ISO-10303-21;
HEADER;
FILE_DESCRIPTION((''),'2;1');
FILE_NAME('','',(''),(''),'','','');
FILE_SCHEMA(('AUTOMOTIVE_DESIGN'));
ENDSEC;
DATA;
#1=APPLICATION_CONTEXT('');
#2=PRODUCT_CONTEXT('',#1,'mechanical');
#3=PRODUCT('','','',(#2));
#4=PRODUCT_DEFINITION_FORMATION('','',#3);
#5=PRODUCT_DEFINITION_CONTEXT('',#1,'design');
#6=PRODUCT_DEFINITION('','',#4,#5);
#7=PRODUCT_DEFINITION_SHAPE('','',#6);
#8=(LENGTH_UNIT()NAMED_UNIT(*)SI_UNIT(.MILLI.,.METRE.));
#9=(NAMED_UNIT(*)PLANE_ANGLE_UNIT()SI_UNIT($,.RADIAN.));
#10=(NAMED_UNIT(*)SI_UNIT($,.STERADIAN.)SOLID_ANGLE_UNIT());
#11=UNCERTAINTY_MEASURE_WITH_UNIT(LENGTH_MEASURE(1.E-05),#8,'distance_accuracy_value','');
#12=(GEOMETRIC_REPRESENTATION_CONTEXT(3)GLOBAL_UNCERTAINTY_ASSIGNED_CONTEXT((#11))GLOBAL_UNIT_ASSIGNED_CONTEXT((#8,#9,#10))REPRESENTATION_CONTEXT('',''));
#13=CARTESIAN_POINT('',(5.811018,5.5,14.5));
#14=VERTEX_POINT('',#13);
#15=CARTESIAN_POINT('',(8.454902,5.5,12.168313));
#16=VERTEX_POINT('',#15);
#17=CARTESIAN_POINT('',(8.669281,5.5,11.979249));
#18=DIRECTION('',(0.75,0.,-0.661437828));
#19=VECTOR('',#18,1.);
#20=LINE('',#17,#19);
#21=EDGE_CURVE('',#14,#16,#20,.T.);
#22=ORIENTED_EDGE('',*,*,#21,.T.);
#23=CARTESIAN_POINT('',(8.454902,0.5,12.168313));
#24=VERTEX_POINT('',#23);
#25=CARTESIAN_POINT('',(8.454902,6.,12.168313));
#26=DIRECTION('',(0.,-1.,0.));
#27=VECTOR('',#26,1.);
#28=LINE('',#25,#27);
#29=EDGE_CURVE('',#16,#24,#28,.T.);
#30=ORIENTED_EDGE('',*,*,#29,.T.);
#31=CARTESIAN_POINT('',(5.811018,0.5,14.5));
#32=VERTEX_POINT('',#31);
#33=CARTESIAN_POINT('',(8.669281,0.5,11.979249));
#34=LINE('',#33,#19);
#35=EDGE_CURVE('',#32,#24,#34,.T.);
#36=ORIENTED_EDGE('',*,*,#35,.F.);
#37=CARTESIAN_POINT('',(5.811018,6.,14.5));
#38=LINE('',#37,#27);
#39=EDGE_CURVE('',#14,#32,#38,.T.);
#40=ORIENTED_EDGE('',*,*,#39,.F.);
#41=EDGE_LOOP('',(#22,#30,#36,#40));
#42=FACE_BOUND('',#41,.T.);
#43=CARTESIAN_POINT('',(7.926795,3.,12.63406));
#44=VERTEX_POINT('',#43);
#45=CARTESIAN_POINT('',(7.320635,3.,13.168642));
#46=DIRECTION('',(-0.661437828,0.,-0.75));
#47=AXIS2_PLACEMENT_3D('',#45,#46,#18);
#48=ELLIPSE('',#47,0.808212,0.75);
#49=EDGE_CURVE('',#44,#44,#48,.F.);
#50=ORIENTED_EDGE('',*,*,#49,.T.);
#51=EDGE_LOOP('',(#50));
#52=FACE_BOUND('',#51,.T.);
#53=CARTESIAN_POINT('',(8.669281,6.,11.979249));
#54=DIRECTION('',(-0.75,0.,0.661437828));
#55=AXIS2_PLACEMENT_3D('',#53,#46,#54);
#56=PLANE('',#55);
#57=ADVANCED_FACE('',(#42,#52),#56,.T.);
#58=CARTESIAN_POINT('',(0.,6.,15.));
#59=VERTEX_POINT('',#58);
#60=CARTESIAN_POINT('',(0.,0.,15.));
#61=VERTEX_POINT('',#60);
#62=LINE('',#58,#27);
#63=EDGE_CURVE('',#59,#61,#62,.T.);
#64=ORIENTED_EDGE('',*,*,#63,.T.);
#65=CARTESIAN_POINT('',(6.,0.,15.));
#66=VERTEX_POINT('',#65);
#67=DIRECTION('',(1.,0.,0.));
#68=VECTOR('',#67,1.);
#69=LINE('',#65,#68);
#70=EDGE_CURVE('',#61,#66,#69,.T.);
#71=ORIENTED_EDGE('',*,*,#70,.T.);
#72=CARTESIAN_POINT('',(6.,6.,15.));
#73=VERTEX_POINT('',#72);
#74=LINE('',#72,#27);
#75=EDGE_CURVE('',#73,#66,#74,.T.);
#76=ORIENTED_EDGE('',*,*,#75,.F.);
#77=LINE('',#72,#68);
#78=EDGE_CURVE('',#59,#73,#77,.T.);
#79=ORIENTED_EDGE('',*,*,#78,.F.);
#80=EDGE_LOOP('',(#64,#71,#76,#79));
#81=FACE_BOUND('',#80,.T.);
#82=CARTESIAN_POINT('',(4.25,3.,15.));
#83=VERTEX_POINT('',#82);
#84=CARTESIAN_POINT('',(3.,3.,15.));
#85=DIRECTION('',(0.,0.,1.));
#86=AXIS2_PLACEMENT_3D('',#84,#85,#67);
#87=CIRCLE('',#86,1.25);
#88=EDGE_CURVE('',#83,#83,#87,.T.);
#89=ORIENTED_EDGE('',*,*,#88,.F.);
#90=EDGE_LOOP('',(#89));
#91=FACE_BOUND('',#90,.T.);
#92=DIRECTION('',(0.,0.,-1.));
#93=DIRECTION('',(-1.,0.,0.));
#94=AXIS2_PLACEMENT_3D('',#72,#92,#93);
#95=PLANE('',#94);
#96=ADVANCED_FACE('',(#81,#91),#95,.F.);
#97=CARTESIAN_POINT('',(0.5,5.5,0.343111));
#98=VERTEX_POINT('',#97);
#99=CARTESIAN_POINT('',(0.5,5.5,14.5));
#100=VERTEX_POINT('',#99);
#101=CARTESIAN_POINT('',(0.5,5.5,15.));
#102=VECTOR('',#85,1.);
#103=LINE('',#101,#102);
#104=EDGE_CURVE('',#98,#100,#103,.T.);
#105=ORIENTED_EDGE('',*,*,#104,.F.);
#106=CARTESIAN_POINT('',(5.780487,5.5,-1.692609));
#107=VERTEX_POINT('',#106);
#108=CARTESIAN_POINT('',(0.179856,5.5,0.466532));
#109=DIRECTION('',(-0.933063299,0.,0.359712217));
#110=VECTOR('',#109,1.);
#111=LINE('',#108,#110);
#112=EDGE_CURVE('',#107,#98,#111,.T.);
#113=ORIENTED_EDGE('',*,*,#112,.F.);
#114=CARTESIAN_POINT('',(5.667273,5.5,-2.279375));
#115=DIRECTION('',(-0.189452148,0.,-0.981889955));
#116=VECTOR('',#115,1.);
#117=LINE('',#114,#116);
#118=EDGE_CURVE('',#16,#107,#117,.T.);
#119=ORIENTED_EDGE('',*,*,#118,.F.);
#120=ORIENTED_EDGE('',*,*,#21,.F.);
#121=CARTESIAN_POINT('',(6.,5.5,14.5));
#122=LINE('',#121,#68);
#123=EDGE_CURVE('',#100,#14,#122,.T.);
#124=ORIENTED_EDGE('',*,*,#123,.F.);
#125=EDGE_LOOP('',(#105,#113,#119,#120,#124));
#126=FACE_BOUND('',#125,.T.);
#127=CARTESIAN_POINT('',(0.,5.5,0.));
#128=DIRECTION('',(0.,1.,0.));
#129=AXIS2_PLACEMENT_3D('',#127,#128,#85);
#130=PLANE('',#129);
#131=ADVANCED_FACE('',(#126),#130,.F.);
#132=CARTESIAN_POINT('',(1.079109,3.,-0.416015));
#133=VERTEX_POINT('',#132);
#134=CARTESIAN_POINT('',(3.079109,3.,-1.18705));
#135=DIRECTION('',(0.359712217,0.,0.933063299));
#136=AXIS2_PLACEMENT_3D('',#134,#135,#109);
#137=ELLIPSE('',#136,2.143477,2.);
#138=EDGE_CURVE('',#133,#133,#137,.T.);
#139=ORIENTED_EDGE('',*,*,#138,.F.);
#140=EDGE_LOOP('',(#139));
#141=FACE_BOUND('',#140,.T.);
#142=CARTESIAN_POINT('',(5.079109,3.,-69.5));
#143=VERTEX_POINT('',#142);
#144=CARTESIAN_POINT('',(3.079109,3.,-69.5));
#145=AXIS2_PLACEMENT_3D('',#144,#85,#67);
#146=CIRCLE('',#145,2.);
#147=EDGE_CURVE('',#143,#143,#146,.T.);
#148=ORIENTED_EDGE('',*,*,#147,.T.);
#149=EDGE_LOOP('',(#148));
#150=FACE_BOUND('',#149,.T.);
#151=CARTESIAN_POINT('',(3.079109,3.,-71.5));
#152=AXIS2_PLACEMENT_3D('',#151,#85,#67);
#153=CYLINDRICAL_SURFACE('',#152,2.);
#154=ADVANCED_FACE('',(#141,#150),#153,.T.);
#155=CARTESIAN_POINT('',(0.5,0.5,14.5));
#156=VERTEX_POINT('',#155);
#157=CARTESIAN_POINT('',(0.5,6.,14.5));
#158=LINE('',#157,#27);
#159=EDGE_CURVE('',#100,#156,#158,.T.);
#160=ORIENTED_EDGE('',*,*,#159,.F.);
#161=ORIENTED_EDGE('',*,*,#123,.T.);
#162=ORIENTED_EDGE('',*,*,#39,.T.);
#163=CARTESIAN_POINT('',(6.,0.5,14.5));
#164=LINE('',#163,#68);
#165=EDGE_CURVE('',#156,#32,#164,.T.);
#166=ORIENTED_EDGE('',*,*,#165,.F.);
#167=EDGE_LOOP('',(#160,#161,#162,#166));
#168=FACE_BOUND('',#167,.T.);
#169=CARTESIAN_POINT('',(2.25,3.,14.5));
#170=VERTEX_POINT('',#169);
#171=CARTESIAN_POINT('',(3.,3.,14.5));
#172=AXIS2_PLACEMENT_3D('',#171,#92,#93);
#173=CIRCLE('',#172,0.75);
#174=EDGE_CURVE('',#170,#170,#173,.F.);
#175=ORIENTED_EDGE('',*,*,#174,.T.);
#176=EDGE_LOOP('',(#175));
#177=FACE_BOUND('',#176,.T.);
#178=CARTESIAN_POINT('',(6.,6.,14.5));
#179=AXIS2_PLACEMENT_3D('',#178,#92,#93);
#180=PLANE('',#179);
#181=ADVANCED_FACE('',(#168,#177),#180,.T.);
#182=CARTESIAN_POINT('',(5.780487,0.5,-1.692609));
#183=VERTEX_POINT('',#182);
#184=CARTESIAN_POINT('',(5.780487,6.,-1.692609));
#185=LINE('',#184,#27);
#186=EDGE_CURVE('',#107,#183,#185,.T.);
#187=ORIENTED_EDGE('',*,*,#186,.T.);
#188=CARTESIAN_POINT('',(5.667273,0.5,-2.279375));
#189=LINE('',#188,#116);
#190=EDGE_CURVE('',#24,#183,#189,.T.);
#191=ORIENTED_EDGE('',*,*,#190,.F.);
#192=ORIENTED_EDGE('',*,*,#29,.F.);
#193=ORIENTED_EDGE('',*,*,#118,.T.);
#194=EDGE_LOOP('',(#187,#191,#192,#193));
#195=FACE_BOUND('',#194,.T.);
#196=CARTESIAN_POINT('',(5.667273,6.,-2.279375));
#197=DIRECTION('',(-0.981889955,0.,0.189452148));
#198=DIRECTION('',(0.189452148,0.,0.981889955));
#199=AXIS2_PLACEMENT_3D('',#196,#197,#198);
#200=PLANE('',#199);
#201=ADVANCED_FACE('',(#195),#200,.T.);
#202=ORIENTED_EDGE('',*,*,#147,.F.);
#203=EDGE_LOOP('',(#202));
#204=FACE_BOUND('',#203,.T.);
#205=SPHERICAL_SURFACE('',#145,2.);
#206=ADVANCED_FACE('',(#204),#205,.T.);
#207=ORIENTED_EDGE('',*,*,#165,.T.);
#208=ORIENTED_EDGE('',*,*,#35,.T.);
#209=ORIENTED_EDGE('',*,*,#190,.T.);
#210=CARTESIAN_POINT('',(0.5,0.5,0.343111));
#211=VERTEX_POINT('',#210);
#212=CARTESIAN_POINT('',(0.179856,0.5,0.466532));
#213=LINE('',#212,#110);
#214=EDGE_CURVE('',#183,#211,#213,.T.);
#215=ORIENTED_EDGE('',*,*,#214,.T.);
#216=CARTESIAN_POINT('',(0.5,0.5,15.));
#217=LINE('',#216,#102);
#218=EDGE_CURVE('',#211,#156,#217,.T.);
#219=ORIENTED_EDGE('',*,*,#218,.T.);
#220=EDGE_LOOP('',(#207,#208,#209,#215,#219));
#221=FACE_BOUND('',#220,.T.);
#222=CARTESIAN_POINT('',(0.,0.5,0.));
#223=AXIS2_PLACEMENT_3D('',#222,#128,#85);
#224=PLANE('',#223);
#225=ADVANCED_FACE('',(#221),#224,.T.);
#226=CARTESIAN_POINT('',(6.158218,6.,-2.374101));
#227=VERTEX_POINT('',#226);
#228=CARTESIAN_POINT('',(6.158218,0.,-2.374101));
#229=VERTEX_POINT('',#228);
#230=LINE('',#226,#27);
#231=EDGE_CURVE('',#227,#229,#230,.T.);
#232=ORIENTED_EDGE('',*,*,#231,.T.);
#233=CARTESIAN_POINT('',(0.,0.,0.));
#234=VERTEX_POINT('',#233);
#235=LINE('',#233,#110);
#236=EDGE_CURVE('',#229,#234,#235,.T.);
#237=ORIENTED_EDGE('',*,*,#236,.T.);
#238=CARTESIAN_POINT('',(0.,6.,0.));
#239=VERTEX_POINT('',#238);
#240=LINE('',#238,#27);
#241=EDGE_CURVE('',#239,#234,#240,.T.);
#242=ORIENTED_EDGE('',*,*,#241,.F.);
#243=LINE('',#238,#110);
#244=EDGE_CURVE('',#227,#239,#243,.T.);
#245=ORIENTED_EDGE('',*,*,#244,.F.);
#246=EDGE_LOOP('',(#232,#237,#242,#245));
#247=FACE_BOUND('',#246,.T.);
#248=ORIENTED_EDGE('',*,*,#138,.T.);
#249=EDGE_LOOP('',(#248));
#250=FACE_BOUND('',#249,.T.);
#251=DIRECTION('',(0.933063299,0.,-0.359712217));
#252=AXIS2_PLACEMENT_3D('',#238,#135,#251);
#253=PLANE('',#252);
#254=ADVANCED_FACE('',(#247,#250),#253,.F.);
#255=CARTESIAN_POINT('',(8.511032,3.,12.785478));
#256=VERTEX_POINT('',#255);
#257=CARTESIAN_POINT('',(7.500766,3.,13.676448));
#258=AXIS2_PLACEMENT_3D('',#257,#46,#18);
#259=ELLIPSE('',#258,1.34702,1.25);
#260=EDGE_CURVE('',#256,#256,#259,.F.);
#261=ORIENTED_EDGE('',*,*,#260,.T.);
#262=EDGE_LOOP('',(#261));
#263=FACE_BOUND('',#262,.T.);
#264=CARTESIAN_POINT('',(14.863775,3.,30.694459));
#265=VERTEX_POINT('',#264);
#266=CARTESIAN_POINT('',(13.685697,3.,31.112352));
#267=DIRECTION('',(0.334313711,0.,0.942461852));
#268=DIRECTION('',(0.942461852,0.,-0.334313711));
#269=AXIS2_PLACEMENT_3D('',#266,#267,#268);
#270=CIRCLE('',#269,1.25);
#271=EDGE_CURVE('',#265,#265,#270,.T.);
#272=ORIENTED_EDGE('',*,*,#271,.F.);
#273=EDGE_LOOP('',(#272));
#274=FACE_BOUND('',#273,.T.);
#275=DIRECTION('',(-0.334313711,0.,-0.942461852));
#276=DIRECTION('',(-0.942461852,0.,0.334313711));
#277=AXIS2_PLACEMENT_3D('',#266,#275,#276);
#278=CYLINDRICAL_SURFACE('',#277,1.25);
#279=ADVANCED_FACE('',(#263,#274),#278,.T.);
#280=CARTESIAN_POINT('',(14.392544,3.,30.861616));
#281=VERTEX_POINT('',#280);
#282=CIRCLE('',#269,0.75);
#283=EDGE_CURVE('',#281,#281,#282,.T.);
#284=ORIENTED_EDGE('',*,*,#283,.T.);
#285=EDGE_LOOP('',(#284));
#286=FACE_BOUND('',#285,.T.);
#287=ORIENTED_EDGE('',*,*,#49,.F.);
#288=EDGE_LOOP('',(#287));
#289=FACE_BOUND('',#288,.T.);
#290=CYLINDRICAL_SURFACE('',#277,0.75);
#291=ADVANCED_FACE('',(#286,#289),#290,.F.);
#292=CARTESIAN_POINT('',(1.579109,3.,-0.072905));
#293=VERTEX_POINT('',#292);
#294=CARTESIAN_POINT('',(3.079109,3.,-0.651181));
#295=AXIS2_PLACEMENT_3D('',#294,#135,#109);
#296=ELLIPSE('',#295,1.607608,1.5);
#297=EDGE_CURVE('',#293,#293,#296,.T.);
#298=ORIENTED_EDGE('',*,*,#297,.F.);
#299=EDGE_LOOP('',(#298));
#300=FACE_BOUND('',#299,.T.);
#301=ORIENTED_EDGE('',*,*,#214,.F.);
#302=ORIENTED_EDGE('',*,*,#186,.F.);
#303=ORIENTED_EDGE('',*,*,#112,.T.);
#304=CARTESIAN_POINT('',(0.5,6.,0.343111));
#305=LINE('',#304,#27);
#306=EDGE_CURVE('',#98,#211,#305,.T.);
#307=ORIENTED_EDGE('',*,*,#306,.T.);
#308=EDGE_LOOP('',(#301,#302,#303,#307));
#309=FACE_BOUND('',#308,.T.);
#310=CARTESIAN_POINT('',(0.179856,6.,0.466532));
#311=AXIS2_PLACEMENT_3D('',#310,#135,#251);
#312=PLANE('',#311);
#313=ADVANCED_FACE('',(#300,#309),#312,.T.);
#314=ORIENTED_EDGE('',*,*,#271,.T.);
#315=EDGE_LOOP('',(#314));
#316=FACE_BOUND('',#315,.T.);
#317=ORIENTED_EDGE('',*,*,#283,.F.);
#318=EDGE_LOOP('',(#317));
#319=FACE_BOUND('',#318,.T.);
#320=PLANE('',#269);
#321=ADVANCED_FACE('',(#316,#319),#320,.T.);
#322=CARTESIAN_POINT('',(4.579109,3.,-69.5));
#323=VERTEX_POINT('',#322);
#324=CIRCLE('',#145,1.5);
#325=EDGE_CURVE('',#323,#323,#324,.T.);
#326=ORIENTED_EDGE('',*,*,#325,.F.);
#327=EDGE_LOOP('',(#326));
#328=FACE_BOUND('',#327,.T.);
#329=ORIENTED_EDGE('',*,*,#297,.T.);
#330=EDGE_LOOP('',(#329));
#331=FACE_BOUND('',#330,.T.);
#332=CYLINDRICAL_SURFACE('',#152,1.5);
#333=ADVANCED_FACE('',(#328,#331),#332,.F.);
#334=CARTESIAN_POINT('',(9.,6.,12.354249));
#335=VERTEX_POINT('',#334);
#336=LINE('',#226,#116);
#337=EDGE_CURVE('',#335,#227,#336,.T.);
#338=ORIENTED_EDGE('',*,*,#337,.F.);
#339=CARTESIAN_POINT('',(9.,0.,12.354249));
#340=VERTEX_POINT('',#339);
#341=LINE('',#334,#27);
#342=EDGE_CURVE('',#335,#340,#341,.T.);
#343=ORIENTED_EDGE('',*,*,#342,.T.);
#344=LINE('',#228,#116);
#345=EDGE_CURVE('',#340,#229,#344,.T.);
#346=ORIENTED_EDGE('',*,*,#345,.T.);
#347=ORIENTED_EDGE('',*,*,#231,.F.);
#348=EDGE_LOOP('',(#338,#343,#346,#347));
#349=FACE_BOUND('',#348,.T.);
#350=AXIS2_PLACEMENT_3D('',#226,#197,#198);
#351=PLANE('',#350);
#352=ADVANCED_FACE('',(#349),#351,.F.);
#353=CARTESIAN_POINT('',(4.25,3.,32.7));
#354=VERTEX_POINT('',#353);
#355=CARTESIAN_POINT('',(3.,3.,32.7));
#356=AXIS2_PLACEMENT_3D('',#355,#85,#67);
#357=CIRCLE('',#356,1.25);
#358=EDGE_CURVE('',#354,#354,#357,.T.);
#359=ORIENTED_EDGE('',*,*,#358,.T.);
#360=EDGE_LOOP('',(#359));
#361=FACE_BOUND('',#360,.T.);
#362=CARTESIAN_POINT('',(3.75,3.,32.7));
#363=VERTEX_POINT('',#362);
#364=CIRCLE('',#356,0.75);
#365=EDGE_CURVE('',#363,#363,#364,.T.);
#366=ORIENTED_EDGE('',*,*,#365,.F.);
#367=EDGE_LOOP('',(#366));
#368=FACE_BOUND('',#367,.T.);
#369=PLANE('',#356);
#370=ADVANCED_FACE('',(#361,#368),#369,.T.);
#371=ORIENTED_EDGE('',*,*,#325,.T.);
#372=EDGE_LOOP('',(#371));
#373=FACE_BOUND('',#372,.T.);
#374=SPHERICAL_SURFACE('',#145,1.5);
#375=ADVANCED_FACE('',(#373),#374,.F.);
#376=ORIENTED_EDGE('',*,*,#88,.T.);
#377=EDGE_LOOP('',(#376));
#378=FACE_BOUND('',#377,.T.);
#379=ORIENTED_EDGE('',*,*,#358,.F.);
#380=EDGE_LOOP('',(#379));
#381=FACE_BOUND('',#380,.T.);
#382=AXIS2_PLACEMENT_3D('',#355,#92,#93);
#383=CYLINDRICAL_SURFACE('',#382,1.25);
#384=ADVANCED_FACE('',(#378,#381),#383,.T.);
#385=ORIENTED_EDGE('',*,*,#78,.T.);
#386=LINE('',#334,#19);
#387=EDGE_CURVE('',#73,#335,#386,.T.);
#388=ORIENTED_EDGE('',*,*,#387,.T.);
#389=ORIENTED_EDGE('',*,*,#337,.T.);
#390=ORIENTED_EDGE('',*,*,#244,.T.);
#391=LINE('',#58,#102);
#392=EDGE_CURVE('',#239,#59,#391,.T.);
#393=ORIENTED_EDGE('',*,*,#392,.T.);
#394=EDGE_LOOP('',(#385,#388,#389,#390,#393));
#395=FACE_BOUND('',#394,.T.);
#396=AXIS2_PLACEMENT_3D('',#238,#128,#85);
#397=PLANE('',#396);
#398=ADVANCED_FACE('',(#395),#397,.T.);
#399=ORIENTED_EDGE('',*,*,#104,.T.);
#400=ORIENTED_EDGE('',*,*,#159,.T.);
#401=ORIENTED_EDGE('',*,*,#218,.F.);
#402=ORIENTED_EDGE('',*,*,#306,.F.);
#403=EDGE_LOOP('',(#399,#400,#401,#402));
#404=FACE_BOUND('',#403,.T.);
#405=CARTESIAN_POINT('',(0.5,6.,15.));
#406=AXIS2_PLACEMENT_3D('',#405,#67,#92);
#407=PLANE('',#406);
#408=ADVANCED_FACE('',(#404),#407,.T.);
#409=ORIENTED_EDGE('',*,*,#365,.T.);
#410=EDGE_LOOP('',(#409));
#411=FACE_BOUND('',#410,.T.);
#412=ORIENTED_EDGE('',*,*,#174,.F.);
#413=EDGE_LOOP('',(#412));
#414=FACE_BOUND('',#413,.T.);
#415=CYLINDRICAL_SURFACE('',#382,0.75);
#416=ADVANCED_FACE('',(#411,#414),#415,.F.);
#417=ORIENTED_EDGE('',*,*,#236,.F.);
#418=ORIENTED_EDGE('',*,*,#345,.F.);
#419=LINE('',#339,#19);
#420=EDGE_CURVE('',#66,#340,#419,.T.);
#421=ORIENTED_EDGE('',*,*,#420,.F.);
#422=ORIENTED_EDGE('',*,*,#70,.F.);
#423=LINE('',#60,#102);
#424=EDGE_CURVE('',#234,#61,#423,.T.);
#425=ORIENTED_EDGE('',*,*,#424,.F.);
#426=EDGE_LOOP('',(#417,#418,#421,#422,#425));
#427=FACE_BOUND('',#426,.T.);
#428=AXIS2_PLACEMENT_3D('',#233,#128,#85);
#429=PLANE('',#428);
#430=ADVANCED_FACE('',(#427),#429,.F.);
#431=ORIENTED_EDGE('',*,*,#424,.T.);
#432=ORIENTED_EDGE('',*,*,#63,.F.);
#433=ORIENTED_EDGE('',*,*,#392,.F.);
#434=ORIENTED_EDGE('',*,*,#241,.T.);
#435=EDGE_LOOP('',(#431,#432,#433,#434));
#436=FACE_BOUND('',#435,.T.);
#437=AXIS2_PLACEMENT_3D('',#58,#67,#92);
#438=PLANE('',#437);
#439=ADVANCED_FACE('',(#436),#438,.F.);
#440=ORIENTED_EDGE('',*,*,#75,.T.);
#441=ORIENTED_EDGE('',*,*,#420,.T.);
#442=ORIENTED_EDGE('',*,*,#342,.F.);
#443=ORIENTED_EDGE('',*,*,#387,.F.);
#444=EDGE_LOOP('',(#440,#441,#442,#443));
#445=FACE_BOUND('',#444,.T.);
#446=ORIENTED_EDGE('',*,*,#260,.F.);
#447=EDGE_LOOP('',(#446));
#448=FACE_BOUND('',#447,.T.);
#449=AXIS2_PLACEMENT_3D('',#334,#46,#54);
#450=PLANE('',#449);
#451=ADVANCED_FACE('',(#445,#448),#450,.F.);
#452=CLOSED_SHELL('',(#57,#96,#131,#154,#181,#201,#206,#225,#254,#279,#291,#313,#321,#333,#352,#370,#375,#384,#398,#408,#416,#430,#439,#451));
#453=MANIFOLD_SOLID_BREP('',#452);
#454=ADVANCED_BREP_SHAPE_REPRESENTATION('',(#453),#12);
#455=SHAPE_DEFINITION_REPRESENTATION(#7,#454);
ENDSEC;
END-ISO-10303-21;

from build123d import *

# Parameters (mm, degrees)
BOSS_EXTRUDE1_DEPTH = 6
SKETCH4_R           = 2
BOSS_EXTRUDE2_DEPTH = 71.5
FILLET1_R           = 2
SKETCH5_R           = 1.25
BOSS_EXTRUDE3_DEPTH = 17.7
SKETCH7_R           = 1.25
BOSS_EXTRUDE4_DEPTH = 18.5
BOSS_EXTRUDE5_START = -5
SKETCH7_2_R         = 1.25
BOSS_EXTRUDE5_DEPTH = 5
SHELL1_T            = -0.5


with BuildPart() as part:
    # Sketch1 → Boss-Extrude1 (new body)
    with BuildSketch(Plane(origin=(0, 0, 0), x_dir=(1, 0, 0), z_dir=(0, 1, 0))):
        Polygon((0, 0), (6.158217776, 2.374100634), (9, -12.354248689), (6, -15), (0, -15), align=None)
    extrude(amount=BOSS_EXTRUDE1_DEPTH)

    # Sketch4 → Boss-Extrude2 (add)
    with BuildSketch(Plane.XY):
        with Locations((3.079108888, 3)):
            Circle(SKETCH4_R)
    extrude(amount=-BOSS_EXTRUDE2_DEPTH)

    # Fillet1
    fillet1_edges = [part.edges().sort_by_distance(p)[0] for p in [
        (1.079108888, 3, -71.5),
    ]]
    fillet(fillet1_edges, radius=FILLET1_R)

    # Sketch5 → Boss-Extrude3 (add)
    with BuildSketch(Plane.XY.offset(15)):
        with Locations((3, 3)):
            Circle(SKETCH5_R)
    extrude(amount=BOSS_EXTRUDE3_DEPTH)

    # Sketch7 → Boss-Extrude4 (add)
    with BuildSketch(Plane(origin=(7.5, 6, 13.677124344), x_dir=(0.9424618522341062, 0, -0.33431371058252735), z_dir=(0.33431371058252735, 0, 0.9424618522341062))):
        with Locations((0.000948247, -3)):
            Circle(SKETCH7_R)
    extrude(amount=BOSS_EXTRUDE4_DEPTH)

    # Sketch7<2> → Boss-Extrude5 (add)
    with BuildSketch(Plane(origin=(7.5, 6, 13.677124344), x_dir=(0.9424618522341062, 0, -0.33431371058252735), z_dir=(0.33431371058252735, 0, 0.9424618522341062)).offset(BOSS_EXTRUDE5_START)):
        with Locations((0.000948247, -3)):
            Circle(SKETCH7_2_R)
    extrude(amount=BOSS_EXTRUDE5_DEPTH)

    # Shell1
    shell1_openings = [part.faces().sort_by_distance(p)[0] for p in [
        (3, 3, 32.7),
        (13.685697333, 3, 31.112351599),
    ]]
    offset(amount=SHELL1_T, openings=shell1_openings, kind=Kind.INTERSECTION)


solid = part.part
